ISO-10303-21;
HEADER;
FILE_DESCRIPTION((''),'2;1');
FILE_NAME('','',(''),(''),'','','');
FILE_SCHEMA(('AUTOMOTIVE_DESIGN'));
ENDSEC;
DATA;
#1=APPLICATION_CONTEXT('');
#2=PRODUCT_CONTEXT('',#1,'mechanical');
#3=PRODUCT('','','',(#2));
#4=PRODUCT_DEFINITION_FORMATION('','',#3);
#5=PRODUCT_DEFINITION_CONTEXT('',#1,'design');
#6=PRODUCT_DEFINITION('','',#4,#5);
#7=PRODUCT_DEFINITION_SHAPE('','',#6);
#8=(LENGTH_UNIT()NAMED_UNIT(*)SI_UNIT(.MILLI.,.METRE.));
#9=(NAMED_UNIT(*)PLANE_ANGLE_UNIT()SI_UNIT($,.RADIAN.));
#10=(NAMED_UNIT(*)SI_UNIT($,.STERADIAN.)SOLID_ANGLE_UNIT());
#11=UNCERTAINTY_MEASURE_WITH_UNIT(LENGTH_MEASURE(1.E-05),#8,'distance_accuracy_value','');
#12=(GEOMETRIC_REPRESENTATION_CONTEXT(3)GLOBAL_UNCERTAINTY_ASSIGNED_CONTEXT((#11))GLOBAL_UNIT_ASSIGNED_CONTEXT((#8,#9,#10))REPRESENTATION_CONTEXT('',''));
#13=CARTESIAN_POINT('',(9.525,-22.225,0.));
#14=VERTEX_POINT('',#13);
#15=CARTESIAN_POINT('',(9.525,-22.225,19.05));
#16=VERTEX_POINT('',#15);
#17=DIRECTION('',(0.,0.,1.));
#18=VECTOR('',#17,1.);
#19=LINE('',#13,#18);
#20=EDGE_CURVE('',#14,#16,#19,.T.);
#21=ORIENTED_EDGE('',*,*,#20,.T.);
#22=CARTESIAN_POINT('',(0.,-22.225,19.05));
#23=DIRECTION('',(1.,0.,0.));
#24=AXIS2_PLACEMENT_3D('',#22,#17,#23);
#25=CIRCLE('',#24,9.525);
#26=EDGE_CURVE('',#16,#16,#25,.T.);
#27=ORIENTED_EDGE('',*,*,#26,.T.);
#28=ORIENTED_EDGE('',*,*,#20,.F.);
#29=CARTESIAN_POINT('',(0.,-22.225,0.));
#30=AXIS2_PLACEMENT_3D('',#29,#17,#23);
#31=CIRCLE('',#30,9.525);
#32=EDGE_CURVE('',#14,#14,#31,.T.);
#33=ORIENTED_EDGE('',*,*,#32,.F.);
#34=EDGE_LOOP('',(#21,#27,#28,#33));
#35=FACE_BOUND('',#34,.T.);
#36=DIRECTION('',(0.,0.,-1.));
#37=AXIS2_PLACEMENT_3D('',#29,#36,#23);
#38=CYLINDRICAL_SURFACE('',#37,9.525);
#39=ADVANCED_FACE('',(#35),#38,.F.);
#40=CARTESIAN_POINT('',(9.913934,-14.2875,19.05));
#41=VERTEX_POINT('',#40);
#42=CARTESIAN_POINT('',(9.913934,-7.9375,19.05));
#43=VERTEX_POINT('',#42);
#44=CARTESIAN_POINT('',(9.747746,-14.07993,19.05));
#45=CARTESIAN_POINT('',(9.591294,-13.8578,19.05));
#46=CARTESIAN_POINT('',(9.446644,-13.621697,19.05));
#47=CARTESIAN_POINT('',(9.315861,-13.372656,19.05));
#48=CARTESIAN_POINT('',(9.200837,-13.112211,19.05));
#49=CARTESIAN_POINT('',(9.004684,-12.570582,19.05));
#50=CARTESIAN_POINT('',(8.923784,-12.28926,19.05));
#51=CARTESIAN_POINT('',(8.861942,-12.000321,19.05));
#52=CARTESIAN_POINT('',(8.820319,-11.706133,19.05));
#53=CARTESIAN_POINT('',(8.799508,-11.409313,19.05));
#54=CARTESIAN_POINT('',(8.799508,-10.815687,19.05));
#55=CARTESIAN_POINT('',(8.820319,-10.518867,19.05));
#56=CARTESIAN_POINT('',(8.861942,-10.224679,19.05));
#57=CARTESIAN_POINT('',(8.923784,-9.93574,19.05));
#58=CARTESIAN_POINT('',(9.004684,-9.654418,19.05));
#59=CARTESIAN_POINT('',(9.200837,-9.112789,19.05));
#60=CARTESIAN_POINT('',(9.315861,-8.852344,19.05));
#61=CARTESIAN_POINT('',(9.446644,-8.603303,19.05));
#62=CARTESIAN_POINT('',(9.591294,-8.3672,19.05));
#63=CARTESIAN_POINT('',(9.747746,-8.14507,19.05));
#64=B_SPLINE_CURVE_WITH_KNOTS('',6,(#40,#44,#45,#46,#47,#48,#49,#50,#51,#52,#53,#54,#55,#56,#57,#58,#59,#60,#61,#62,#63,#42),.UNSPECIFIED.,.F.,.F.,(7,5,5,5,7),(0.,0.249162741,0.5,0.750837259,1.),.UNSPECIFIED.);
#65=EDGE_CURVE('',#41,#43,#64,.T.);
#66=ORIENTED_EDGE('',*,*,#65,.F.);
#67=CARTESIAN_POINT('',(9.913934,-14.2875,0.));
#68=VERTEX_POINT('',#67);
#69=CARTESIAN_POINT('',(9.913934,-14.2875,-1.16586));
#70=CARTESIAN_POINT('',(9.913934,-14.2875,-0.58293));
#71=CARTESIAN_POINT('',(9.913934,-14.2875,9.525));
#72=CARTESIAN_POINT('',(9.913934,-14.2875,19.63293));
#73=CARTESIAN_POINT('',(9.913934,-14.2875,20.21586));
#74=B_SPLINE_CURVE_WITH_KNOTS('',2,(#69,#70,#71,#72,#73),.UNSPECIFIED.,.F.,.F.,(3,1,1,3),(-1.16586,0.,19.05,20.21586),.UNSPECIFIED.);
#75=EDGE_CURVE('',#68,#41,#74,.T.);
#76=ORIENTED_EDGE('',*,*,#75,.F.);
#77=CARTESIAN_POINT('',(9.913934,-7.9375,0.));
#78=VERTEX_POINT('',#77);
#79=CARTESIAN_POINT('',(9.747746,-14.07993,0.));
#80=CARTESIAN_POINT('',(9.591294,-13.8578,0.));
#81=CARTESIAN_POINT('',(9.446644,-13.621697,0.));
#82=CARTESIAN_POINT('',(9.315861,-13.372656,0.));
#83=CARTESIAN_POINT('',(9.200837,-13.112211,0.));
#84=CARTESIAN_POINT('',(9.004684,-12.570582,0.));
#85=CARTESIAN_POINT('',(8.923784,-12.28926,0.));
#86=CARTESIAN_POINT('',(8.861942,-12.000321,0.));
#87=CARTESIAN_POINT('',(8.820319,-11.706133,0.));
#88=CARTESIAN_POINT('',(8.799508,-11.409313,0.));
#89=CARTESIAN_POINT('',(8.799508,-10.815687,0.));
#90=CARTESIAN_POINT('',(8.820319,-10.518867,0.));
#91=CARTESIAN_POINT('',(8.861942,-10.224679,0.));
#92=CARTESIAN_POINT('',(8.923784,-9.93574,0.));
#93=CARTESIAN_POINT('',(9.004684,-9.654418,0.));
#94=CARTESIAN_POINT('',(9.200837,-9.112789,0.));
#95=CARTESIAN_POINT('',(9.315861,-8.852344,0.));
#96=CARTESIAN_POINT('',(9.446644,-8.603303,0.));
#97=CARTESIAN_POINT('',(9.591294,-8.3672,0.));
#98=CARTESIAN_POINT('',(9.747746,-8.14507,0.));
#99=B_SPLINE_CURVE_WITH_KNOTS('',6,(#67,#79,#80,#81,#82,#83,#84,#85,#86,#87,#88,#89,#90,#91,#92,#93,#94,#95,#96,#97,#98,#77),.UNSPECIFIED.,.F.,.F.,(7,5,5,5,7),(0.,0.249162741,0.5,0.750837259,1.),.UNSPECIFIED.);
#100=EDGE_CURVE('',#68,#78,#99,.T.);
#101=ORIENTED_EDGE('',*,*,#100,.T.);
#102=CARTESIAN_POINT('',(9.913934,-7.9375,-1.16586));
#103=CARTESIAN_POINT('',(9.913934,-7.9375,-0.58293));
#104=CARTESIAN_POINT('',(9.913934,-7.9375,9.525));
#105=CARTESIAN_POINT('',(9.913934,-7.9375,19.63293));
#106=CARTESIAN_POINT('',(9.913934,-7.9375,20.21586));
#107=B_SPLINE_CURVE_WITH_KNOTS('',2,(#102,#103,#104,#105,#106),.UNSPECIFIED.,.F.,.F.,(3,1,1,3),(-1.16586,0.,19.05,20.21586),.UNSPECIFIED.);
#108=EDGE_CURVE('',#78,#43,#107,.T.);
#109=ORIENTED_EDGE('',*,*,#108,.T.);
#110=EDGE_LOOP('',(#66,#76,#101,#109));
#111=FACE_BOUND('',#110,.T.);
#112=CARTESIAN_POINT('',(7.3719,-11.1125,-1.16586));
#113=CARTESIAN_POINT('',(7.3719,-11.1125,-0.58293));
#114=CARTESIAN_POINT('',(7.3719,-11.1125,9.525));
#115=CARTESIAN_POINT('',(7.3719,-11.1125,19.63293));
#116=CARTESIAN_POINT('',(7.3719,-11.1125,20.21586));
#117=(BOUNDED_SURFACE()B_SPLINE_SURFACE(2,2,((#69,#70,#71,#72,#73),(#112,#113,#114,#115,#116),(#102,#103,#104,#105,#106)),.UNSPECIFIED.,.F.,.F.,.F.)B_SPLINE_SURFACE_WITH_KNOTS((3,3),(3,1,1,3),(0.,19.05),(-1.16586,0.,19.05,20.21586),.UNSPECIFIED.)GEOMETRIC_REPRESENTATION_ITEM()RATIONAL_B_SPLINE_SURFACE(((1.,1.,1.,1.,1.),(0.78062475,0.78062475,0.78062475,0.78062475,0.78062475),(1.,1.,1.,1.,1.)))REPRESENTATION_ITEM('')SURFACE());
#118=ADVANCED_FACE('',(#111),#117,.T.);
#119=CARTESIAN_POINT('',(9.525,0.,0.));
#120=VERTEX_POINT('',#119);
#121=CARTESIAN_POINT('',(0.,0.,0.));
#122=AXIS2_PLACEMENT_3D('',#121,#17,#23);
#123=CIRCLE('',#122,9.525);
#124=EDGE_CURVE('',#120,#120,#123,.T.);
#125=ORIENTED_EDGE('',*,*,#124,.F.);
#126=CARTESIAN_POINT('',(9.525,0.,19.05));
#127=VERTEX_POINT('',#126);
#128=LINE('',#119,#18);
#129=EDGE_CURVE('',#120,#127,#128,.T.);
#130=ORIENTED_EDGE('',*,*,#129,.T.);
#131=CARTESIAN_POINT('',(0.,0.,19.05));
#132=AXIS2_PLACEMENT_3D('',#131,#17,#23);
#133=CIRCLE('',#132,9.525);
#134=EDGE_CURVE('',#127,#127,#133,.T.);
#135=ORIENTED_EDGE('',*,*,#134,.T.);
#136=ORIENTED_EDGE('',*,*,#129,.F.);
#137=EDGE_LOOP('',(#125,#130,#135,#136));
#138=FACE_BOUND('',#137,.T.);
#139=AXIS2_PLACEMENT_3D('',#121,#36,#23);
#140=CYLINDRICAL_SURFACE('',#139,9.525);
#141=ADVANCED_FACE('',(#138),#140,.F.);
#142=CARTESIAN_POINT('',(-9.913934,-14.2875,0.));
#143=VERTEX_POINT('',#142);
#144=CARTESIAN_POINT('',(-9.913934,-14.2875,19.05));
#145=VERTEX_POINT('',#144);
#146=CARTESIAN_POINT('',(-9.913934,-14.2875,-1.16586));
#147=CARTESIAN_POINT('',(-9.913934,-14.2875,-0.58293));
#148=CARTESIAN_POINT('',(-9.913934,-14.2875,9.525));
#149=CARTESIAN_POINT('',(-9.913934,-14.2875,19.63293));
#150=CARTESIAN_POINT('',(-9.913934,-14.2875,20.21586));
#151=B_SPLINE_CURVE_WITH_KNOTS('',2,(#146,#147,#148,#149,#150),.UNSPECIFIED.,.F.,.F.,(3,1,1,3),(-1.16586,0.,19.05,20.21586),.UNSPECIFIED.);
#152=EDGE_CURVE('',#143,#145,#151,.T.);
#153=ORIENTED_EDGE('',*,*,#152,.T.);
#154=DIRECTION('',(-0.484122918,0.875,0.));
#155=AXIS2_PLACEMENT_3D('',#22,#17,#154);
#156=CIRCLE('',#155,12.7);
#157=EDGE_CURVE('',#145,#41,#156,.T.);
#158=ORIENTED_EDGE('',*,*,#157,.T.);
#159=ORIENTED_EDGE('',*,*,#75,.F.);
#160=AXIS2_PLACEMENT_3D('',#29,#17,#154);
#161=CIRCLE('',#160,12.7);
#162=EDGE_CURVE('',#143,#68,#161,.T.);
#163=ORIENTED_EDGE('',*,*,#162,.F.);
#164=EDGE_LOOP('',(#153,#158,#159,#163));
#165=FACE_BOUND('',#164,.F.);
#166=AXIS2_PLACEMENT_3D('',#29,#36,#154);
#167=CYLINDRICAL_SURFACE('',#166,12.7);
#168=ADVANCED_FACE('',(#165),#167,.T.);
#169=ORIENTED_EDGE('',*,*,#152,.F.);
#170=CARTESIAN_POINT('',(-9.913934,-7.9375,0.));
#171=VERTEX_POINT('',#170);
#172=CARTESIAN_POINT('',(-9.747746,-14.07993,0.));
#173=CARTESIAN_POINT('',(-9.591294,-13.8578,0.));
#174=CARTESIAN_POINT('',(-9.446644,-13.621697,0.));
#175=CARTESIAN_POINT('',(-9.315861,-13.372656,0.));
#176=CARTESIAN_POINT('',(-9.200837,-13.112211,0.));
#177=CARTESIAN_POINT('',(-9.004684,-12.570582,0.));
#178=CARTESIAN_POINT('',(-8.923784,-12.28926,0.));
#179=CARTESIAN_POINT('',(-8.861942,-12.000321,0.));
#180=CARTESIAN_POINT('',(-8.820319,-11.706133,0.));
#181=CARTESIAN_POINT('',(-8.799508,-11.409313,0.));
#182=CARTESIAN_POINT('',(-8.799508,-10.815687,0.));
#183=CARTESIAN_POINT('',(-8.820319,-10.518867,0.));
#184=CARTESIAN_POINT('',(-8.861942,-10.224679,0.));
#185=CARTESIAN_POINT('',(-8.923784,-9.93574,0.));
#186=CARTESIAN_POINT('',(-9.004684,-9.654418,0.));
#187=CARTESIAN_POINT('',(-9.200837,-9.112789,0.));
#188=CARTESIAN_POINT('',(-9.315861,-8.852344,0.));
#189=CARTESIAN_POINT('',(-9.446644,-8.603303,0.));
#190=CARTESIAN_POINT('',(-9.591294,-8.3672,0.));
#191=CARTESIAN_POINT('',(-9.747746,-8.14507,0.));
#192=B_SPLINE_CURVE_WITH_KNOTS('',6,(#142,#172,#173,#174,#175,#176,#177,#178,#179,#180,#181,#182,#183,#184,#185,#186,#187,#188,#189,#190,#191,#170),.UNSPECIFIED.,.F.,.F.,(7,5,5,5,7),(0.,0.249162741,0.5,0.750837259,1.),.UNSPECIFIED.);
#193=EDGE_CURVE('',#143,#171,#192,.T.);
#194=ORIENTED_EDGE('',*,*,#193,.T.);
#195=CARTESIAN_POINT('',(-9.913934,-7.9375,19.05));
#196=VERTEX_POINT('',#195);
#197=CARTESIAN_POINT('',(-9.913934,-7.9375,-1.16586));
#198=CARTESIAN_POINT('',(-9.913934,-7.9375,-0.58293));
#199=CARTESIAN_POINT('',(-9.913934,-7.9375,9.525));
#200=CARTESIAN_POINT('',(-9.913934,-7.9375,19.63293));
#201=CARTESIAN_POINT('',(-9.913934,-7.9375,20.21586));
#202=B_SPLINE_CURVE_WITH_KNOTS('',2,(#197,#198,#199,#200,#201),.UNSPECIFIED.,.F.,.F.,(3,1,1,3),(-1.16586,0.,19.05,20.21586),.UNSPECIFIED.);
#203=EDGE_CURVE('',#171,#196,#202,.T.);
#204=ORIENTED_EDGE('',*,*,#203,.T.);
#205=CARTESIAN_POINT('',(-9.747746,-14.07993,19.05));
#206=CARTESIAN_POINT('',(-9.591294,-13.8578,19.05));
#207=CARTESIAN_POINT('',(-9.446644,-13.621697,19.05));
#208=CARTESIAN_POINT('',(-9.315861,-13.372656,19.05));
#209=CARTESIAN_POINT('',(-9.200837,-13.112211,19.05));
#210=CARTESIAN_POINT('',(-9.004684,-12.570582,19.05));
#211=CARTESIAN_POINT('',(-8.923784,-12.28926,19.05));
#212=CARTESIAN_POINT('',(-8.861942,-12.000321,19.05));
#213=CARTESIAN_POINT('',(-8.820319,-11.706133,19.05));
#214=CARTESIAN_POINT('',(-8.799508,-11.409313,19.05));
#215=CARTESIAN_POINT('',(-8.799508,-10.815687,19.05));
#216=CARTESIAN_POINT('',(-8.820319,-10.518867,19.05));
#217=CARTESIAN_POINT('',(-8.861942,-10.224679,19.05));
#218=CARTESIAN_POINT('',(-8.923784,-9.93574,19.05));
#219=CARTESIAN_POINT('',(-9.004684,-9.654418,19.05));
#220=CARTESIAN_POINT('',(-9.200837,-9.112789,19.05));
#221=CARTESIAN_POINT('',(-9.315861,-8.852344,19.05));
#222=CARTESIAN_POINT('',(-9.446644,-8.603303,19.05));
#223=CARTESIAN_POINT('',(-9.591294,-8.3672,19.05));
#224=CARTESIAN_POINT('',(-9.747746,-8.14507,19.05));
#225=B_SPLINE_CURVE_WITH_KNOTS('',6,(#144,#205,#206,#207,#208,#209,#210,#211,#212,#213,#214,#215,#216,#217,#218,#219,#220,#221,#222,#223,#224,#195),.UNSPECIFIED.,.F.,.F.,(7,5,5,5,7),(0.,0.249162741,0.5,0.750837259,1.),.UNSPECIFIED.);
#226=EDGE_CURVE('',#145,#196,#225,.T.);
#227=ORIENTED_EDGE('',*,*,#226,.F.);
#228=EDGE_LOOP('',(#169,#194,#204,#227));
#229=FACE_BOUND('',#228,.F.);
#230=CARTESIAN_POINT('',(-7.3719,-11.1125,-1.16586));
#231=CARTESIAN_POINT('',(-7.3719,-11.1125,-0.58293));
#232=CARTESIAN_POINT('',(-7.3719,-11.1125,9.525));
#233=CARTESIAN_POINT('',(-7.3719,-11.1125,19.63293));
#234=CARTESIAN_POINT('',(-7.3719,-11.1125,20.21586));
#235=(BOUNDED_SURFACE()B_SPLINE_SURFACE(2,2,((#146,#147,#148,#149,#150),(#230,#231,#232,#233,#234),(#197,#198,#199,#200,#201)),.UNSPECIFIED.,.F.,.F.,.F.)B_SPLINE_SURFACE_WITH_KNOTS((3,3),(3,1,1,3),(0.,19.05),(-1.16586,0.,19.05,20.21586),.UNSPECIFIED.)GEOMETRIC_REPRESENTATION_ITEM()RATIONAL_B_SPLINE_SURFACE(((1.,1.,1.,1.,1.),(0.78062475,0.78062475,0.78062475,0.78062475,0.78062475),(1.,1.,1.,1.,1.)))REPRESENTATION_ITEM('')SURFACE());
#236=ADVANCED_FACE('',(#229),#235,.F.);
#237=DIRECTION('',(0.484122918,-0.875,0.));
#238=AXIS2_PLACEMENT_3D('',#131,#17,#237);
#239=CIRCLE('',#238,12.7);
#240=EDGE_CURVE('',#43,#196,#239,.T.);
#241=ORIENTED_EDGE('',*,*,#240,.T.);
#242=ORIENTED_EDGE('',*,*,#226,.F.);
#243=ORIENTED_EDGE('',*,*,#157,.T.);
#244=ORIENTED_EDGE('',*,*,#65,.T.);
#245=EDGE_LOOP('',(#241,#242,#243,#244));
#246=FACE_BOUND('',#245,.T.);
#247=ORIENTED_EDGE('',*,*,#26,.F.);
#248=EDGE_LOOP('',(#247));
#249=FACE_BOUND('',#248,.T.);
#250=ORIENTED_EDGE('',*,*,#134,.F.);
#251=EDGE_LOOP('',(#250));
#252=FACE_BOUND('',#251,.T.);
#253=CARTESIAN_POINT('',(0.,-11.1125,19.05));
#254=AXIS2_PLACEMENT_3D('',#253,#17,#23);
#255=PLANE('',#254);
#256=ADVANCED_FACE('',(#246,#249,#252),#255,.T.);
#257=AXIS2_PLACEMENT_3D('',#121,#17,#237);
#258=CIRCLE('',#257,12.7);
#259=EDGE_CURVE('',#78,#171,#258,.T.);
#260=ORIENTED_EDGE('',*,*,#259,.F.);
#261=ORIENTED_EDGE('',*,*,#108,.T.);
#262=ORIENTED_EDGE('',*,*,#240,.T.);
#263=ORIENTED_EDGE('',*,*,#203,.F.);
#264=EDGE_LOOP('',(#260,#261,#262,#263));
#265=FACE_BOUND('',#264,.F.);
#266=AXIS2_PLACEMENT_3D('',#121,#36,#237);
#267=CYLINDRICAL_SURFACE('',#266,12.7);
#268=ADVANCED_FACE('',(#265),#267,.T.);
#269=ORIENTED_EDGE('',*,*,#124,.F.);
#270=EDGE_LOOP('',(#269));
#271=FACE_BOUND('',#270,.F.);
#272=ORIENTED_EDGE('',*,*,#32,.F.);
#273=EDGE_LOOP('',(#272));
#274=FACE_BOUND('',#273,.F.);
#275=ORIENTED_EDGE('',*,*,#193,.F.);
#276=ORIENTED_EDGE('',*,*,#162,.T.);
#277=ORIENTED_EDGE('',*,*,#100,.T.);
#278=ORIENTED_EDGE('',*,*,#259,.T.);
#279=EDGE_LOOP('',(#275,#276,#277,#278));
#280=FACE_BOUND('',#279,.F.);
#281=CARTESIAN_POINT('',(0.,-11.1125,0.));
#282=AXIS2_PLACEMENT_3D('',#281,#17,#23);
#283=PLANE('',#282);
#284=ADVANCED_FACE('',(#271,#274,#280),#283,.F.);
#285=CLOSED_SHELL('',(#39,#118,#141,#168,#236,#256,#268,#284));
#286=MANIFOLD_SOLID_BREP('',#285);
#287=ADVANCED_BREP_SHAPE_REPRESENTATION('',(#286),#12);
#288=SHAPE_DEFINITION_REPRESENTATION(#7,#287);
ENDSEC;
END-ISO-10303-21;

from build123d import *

# Parameters (mm, degrees)
F0_R     = 9.525
F1_DEPTH = 19.05
F2_R     = 5.08


with BuildPart() as f1:
    # F0 (on Top) → F1 (new body)
    with BuildSketch(Plane.XY):
        with BuildLine():
            ThreePointArc((-6.1483610621, -11.1125), (0, -34.925), (6.1483610621, -11.1125))
            ThreePointArc((6.1483610621, -11.1125), (0, 12.7), (-6.1483610621, -11.1125))
        make_face()
        with Locations((0, -22.225)):
            Circle(F0_R, mode=Mode.SUBTRACT)
        Circle(F0_R, mode=Mode.SUBTRACT)
    extrude(amount=F1_DEPTH)

    # F2
    f2_edges = [f1.edges().sort_by_distance(p)[0] for p in [
        (6.148361, -11.1125, 9.525),
        (-6.148361, -11.1125, 9.525),
    ]]
    fillet(f2_edges, radius=F2_R)


solid = f1.part
